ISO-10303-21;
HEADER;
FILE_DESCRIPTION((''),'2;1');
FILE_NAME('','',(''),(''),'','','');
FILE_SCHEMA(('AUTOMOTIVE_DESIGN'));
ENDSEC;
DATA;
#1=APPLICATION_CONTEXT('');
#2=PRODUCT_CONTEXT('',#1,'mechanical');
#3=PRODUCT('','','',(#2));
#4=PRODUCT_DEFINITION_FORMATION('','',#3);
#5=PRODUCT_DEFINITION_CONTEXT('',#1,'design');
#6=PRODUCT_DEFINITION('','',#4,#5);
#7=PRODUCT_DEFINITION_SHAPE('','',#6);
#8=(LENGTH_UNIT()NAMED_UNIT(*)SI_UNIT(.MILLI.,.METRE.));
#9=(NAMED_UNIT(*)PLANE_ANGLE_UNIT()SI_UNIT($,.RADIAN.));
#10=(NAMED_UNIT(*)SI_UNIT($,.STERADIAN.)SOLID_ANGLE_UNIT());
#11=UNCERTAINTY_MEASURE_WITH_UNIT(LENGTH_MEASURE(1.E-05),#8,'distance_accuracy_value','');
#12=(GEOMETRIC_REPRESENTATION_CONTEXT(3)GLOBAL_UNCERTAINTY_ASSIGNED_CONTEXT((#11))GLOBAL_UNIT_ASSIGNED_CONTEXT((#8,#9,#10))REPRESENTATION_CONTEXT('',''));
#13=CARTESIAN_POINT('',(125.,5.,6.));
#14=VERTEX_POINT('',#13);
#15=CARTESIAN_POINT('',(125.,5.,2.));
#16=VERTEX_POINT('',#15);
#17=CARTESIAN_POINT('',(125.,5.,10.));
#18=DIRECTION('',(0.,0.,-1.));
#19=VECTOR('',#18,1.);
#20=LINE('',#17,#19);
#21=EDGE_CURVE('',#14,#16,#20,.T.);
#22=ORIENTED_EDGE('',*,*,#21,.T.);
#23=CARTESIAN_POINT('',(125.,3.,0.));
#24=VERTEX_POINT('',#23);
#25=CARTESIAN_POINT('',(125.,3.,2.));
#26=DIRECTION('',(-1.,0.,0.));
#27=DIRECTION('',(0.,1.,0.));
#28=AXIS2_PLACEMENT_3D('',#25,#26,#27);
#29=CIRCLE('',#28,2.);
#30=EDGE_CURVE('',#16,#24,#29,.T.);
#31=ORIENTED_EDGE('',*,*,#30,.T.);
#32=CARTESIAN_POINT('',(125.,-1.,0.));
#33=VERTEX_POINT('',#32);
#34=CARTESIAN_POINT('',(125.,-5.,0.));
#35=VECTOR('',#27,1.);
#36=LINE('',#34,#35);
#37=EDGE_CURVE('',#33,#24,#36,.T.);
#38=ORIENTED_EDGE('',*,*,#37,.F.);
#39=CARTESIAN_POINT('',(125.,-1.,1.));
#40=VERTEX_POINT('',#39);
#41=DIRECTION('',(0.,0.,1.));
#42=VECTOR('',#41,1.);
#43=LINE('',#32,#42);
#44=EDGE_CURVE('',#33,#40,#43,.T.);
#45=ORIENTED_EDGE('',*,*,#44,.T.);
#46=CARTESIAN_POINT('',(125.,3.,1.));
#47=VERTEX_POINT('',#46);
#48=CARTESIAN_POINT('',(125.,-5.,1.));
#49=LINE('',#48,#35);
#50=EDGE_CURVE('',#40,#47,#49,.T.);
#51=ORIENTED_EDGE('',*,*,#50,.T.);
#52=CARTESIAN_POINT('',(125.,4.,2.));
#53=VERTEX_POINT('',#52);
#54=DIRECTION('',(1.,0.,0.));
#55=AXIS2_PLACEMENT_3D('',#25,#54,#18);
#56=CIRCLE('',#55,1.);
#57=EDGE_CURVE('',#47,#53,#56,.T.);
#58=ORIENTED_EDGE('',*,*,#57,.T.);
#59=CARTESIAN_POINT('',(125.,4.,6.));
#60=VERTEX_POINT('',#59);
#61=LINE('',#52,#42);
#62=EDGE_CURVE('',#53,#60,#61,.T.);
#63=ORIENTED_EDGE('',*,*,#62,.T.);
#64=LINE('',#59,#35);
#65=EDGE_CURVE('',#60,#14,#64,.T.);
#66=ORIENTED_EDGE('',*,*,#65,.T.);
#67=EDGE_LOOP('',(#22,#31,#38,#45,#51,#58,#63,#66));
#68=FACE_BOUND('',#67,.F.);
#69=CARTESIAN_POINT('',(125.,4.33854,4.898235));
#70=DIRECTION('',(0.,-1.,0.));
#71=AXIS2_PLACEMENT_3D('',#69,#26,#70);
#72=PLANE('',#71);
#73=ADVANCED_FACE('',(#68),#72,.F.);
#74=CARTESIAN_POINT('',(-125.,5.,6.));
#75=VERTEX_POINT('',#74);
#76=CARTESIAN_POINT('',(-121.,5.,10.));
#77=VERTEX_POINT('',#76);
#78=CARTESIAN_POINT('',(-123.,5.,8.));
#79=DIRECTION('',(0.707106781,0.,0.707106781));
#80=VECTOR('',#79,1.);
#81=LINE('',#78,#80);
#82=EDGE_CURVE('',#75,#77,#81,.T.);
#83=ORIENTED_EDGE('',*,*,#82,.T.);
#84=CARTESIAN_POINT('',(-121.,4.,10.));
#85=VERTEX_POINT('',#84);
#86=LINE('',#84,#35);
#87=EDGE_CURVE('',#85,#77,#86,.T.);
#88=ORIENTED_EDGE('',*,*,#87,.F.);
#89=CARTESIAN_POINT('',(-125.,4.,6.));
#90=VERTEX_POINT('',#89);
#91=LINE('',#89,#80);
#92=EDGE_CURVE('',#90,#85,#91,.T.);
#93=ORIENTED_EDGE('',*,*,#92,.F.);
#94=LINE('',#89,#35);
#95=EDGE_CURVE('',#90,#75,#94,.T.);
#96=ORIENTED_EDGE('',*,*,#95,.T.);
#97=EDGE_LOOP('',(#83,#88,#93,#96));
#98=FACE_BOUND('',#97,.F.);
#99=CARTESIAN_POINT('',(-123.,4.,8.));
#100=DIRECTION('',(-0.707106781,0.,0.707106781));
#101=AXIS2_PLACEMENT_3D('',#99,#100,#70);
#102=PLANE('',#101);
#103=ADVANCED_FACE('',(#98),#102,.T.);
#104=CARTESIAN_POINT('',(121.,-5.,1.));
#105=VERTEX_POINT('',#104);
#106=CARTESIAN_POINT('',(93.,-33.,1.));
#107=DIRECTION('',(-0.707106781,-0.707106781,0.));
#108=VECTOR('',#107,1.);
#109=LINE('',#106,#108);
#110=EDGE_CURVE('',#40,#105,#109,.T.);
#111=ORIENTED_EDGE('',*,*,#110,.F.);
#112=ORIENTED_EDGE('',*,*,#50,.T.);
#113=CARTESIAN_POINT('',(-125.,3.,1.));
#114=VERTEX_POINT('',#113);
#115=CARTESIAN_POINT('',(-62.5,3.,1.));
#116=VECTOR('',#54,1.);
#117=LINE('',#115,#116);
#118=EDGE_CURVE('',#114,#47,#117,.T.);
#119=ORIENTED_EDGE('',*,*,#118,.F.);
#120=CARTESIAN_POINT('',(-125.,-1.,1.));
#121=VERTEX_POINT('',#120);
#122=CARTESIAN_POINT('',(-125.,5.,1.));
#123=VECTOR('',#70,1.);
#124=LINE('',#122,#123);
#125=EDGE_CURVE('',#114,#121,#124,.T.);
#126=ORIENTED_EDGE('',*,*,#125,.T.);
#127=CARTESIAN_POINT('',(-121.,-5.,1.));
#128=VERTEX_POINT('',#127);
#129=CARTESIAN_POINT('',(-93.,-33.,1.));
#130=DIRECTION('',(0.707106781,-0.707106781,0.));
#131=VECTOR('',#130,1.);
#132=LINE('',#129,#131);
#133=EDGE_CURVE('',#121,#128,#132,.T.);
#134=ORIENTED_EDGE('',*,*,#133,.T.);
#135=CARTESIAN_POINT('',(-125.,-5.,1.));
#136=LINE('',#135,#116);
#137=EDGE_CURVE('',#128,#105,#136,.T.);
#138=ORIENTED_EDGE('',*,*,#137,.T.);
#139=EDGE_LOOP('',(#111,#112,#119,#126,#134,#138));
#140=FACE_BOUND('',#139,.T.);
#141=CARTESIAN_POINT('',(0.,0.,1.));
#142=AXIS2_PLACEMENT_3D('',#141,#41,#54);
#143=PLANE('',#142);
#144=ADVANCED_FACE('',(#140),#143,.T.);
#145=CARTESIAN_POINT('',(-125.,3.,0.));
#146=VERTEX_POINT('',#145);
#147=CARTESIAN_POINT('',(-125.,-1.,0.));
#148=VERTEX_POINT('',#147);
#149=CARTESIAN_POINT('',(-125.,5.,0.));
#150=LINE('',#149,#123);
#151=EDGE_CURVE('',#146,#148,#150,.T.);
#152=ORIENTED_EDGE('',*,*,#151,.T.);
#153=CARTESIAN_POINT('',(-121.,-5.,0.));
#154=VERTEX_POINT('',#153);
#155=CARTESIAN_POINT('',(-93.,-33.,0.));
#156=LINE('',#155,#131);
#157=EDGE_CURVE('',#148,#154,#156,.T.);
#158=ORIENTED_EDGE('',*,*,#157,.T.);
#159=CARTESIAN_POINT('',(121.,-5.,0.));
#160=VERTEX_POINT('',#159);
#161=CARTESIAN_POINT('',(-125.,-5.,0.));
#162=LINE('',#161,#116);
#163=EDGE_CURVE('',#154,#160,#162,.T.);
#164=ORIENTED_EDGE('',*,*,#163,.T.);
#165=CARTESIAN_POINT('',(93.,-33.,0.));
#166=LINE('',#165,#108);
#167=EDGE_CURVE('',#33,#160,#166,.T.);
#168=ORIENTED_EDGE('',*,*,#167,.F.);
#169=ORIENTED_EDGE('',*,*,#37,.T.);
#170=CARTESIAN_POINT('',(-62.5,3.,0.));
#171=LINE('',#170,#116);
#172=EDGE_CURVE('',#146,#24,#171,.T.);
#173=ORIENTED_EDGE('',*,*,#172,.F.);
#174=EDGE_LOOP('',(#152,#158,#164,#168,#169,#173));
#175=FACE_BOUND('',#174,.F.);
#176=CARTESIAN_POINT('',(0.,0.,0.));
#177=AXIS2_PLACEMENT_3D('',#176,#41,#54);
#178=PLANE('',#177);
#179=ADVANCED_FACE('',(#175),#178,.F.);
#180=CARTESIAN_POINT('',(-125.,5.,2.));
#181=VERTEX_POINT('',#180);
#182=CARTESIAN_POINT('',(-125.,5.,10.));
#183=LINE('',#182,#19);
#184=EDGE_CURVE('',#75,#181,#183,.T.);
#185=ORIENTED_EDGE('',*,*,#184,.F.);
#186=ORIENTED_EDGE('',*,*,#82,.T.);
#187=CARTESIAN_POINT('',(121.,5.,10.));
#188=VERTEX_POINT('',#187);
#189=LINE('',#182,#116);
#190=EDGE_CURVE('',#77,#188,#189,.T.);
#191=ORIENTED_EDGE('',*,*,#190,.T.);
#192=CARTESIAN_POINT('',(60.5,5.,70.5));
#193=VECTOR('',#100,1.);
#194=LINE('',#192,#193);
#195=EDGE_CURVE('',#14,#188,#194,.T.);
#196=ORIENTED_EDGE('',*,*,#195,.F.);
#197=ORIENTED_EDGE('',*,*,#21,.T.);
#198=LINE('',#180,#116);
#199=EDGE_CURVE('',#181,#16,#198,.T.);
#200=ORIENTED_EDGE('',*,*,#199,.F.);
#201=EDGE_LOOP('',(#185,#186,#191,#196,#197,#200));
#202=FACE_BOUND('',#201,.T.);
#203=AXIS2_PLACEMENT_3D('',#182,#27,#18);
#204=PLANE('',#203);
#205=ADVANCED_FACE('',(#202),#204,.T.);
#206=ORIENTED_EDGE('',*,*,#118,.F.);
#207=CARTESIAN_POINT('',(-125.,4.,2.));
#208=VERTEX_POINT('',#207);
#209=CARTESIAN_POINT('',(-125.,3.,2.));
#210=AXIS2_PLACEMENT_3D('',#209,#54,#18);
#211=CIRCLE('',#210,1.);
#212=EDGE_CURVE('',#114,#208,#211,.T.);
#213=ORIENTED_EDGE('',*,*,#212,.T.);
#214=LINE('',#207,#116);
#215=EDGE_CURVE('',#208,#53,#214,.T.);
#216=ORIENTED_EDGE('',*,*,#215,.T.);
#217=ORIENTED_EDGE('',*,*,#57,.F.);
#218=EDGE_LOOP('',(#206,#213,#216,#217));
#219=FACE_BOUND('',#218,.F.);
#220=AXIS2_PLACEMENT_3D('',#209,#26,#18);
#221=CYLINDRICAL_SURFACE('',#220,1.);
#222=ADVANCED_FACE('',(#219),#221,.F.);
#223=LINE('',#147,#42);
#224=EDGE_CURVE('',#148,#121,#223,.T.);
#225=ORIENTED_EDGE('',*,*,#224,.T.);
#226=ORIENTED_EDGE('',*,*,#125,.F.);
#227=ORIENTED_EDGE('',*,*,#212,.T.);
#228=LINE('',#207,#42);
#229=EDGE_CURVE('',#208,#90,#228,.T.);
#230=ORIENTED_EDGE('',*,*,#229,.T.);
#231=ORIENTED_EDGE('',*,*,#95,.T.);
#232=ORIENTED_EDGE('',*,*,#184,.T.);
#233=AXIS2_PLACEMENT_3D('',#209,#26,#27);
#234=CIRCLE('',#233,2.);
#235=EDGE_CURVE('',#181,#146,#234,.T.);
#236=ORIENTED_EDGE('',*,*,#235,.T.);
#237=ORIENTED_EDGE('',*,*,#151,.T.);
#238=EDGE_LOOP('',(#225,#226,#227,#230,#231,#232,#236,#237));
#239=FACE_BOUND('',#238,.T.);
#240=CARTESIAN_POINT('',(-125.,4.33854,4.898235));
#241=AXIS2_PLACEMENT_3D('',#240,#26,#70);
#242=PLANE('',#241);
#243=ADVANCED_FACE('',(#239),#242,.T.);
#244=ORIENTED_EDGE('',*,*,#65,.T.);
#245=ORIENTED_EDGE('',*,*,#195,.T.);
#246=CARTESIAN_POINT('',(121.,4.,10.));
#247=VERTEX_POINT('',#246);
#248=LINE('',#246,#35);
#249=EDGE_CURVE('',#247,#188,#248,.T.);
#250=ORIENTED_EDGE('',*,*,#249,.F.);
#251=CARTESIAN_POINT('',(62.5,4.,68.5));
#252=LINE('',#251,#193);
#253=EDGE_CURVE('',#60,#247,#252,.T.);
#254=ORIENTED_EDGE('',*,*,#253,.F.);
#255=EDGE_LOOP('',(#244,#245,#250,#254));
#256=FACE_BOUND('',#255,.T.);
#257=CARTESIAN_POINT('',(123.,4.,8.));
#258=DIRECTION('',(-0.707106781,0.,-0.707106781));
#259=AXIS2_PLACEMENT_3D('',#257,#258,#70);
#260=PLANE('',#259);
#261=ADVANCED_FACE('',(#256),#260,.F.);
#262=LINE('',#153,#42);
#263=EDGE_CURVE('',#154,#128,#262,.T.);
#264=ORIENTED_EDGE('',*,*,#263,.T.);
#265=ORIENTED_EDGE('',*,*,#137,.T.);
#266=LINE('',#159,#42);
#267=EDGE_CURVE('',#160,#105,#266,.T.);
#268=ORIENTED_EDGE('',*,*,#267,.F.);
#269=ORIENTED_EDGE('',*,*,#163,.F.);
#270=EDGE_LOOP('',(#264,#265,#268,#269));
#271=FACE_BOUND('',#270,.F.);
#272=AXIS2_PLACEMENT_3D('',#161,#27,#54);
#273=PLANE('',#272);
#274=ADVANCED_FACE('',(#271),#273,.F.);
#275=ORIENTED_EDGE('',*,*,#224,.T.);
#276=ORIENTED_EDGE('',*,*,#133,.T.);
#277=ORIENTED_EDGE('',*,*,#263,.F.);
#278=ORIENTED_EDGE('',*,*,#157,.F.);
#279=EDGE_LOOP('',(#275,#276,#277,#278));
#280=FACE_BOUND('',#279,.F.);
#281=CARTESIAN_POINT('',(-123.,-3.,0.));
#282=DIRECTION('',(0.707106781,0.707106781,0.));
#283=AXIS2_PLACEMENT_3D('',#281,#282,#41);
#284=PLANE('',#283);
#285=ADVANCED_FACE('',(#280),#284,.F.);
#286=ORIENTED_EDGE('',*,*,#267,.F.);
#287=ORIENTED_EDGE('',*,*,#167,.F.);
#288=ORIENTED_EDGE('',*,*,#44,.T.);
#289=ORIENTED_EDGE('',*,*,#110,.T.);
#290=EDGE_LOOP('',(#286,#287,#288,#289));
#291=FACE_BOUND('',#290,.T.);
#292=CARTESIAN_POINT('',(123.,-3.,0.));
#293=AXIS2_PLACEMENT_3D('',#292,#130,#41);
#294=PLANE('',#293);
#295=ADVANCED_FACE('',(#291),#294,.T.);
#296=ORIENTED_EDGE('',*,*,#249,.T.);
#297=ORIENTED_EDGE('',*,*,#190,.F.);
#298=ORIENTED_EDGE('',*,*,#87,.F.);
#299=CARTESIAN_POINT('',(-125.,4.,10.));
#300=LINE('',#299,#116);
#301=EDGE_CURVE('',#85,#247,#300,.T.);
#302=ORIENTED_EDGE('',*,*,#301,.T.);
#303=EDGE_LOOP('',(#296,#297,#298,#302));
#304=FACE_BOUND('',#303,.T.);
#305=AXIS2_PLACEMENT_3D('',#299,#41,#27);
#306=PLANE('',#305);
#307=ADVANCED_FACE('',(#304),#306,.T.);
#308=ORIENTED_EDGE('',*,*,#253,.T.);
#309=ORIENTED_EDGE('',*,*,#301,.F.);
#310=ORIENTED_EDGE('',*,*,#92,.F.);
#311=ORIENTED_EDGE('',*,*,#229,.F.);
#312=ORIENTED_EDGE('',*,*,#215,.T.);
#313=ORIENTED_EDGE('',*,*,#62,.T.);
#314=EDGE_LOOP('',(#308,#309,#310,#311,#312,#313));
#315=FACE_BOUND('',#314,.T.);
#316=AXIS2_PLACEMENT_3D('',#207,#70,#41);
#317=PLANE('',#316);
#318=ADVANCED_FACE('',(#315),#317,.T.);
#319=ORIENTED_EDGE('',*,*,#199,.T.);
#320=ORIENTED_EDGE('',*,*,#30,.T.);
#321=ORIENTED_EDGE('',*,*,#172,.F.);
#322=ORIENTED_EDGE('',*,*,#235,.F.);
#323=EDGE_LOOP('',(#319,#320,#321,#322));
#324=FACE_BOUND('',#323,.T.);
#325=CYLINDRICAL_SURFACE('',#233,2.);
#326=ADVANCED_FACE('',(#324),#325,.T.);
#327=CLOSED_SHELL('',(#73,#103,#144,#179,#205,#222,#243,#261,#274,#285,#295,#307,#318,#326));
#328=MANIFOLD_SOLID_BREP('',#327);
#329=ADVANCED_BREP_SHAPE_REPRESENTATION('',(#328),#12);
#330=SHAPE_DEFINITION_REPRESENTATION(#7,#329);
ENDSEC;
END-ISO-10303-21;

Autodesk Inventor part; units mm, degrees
ref_plane "YZ Plane" through (0, 0, 0) normal (1, 0, 0) x (0, 1, 0)
ref_plane "XZ Plane" through (0, 0, 0) normal (0, 1, 0) x (-1, 0, 0)
ref_plane "XY Plane" through (0, 0, 0) normal (0, 0, 1) x (1, 0, 0)
sketch "Sketch1" plane through (0, 0, 0) normal (0, 0, 1) x (1, 0, 0)
  line L0 (-125, -5) -> (125, -5)
  line L1 (125, -5) -> (125, 5)
  line L2 (125, 5) -> (-125, 5)
  line L3 (-125, 5) -> (-125, -5)
  line L4 (-125, -5) -> (125, 5) construction
  line L5 (125, -5) -> (-125, 5) construction
  point P0 (0, 0)
  dimension "d0" = 250
  dimension "d1" = 10
extrude "Plate1" add sketch "Sketch1" along normal blind 1
sketch "Sketch2" plane through (-125, 4, 0) normal (0, 1, 0) x (-1, 0, 0)
  line L0 (-250, 0) -> (0, 0)
  line L1 (0, 0) -> (0, 10)
  line L2 (0, 10) -> (-250, 10)
  line L3 (-250, 10) -> (-250, 0)
edge flange "Flange1" height 10 angle 90 thickness 1 bend radius 1 thickness toward (0, 1, 0) relief tear relief width 1 relief depth 0.5 edges at (0, 5, 1) wall of the first edge with corners at (125, 4, 0) (-125, 4, 0) (-125, 4, 10) (125, 4, 10)
bend "Bend1"
corner "Corner1"
chamfer "Corner Chamfer1" distance 4 angle 45 4 edges at (-125, 4.5, 10) (125, -5, 0.5) (125, 4.5, 10) (-125, -5, 0.5)
equation "\"d3\" = BendReliefWidth"
equation "\"d4\" = BendReliefDepth"
equation "\"d5\" = MinimumRemnant"
equation "\"d6\" = BendRadius"
equation "\"d9\" = BendRadius"
equation "\"d10\" = CornerReliefSize"
equation "\"d11\" = GapSize"
equation "\"d12\" = JacobiRadiusSize"
equation "\"BendRadius\" = Thickness"
equation "\"BendReliefWidth\" = Thickness"
equation "\"BendReliefDepth\" = 0.5 * Thickness"
equation "\"CornerReliefSize\" = 4 * Thickness"
equation "\"MinimumRemnant\" = 2 * Thickness"
equation "\"TransitionRadius\" = BendRadius"
equation "\"JacobiRadiusSize\" = BendRadius"
equation "\"GapSize\" = Thickness"
equation "\"d2\" = BendRadius"
equation "\"Thickness\" = 1"
